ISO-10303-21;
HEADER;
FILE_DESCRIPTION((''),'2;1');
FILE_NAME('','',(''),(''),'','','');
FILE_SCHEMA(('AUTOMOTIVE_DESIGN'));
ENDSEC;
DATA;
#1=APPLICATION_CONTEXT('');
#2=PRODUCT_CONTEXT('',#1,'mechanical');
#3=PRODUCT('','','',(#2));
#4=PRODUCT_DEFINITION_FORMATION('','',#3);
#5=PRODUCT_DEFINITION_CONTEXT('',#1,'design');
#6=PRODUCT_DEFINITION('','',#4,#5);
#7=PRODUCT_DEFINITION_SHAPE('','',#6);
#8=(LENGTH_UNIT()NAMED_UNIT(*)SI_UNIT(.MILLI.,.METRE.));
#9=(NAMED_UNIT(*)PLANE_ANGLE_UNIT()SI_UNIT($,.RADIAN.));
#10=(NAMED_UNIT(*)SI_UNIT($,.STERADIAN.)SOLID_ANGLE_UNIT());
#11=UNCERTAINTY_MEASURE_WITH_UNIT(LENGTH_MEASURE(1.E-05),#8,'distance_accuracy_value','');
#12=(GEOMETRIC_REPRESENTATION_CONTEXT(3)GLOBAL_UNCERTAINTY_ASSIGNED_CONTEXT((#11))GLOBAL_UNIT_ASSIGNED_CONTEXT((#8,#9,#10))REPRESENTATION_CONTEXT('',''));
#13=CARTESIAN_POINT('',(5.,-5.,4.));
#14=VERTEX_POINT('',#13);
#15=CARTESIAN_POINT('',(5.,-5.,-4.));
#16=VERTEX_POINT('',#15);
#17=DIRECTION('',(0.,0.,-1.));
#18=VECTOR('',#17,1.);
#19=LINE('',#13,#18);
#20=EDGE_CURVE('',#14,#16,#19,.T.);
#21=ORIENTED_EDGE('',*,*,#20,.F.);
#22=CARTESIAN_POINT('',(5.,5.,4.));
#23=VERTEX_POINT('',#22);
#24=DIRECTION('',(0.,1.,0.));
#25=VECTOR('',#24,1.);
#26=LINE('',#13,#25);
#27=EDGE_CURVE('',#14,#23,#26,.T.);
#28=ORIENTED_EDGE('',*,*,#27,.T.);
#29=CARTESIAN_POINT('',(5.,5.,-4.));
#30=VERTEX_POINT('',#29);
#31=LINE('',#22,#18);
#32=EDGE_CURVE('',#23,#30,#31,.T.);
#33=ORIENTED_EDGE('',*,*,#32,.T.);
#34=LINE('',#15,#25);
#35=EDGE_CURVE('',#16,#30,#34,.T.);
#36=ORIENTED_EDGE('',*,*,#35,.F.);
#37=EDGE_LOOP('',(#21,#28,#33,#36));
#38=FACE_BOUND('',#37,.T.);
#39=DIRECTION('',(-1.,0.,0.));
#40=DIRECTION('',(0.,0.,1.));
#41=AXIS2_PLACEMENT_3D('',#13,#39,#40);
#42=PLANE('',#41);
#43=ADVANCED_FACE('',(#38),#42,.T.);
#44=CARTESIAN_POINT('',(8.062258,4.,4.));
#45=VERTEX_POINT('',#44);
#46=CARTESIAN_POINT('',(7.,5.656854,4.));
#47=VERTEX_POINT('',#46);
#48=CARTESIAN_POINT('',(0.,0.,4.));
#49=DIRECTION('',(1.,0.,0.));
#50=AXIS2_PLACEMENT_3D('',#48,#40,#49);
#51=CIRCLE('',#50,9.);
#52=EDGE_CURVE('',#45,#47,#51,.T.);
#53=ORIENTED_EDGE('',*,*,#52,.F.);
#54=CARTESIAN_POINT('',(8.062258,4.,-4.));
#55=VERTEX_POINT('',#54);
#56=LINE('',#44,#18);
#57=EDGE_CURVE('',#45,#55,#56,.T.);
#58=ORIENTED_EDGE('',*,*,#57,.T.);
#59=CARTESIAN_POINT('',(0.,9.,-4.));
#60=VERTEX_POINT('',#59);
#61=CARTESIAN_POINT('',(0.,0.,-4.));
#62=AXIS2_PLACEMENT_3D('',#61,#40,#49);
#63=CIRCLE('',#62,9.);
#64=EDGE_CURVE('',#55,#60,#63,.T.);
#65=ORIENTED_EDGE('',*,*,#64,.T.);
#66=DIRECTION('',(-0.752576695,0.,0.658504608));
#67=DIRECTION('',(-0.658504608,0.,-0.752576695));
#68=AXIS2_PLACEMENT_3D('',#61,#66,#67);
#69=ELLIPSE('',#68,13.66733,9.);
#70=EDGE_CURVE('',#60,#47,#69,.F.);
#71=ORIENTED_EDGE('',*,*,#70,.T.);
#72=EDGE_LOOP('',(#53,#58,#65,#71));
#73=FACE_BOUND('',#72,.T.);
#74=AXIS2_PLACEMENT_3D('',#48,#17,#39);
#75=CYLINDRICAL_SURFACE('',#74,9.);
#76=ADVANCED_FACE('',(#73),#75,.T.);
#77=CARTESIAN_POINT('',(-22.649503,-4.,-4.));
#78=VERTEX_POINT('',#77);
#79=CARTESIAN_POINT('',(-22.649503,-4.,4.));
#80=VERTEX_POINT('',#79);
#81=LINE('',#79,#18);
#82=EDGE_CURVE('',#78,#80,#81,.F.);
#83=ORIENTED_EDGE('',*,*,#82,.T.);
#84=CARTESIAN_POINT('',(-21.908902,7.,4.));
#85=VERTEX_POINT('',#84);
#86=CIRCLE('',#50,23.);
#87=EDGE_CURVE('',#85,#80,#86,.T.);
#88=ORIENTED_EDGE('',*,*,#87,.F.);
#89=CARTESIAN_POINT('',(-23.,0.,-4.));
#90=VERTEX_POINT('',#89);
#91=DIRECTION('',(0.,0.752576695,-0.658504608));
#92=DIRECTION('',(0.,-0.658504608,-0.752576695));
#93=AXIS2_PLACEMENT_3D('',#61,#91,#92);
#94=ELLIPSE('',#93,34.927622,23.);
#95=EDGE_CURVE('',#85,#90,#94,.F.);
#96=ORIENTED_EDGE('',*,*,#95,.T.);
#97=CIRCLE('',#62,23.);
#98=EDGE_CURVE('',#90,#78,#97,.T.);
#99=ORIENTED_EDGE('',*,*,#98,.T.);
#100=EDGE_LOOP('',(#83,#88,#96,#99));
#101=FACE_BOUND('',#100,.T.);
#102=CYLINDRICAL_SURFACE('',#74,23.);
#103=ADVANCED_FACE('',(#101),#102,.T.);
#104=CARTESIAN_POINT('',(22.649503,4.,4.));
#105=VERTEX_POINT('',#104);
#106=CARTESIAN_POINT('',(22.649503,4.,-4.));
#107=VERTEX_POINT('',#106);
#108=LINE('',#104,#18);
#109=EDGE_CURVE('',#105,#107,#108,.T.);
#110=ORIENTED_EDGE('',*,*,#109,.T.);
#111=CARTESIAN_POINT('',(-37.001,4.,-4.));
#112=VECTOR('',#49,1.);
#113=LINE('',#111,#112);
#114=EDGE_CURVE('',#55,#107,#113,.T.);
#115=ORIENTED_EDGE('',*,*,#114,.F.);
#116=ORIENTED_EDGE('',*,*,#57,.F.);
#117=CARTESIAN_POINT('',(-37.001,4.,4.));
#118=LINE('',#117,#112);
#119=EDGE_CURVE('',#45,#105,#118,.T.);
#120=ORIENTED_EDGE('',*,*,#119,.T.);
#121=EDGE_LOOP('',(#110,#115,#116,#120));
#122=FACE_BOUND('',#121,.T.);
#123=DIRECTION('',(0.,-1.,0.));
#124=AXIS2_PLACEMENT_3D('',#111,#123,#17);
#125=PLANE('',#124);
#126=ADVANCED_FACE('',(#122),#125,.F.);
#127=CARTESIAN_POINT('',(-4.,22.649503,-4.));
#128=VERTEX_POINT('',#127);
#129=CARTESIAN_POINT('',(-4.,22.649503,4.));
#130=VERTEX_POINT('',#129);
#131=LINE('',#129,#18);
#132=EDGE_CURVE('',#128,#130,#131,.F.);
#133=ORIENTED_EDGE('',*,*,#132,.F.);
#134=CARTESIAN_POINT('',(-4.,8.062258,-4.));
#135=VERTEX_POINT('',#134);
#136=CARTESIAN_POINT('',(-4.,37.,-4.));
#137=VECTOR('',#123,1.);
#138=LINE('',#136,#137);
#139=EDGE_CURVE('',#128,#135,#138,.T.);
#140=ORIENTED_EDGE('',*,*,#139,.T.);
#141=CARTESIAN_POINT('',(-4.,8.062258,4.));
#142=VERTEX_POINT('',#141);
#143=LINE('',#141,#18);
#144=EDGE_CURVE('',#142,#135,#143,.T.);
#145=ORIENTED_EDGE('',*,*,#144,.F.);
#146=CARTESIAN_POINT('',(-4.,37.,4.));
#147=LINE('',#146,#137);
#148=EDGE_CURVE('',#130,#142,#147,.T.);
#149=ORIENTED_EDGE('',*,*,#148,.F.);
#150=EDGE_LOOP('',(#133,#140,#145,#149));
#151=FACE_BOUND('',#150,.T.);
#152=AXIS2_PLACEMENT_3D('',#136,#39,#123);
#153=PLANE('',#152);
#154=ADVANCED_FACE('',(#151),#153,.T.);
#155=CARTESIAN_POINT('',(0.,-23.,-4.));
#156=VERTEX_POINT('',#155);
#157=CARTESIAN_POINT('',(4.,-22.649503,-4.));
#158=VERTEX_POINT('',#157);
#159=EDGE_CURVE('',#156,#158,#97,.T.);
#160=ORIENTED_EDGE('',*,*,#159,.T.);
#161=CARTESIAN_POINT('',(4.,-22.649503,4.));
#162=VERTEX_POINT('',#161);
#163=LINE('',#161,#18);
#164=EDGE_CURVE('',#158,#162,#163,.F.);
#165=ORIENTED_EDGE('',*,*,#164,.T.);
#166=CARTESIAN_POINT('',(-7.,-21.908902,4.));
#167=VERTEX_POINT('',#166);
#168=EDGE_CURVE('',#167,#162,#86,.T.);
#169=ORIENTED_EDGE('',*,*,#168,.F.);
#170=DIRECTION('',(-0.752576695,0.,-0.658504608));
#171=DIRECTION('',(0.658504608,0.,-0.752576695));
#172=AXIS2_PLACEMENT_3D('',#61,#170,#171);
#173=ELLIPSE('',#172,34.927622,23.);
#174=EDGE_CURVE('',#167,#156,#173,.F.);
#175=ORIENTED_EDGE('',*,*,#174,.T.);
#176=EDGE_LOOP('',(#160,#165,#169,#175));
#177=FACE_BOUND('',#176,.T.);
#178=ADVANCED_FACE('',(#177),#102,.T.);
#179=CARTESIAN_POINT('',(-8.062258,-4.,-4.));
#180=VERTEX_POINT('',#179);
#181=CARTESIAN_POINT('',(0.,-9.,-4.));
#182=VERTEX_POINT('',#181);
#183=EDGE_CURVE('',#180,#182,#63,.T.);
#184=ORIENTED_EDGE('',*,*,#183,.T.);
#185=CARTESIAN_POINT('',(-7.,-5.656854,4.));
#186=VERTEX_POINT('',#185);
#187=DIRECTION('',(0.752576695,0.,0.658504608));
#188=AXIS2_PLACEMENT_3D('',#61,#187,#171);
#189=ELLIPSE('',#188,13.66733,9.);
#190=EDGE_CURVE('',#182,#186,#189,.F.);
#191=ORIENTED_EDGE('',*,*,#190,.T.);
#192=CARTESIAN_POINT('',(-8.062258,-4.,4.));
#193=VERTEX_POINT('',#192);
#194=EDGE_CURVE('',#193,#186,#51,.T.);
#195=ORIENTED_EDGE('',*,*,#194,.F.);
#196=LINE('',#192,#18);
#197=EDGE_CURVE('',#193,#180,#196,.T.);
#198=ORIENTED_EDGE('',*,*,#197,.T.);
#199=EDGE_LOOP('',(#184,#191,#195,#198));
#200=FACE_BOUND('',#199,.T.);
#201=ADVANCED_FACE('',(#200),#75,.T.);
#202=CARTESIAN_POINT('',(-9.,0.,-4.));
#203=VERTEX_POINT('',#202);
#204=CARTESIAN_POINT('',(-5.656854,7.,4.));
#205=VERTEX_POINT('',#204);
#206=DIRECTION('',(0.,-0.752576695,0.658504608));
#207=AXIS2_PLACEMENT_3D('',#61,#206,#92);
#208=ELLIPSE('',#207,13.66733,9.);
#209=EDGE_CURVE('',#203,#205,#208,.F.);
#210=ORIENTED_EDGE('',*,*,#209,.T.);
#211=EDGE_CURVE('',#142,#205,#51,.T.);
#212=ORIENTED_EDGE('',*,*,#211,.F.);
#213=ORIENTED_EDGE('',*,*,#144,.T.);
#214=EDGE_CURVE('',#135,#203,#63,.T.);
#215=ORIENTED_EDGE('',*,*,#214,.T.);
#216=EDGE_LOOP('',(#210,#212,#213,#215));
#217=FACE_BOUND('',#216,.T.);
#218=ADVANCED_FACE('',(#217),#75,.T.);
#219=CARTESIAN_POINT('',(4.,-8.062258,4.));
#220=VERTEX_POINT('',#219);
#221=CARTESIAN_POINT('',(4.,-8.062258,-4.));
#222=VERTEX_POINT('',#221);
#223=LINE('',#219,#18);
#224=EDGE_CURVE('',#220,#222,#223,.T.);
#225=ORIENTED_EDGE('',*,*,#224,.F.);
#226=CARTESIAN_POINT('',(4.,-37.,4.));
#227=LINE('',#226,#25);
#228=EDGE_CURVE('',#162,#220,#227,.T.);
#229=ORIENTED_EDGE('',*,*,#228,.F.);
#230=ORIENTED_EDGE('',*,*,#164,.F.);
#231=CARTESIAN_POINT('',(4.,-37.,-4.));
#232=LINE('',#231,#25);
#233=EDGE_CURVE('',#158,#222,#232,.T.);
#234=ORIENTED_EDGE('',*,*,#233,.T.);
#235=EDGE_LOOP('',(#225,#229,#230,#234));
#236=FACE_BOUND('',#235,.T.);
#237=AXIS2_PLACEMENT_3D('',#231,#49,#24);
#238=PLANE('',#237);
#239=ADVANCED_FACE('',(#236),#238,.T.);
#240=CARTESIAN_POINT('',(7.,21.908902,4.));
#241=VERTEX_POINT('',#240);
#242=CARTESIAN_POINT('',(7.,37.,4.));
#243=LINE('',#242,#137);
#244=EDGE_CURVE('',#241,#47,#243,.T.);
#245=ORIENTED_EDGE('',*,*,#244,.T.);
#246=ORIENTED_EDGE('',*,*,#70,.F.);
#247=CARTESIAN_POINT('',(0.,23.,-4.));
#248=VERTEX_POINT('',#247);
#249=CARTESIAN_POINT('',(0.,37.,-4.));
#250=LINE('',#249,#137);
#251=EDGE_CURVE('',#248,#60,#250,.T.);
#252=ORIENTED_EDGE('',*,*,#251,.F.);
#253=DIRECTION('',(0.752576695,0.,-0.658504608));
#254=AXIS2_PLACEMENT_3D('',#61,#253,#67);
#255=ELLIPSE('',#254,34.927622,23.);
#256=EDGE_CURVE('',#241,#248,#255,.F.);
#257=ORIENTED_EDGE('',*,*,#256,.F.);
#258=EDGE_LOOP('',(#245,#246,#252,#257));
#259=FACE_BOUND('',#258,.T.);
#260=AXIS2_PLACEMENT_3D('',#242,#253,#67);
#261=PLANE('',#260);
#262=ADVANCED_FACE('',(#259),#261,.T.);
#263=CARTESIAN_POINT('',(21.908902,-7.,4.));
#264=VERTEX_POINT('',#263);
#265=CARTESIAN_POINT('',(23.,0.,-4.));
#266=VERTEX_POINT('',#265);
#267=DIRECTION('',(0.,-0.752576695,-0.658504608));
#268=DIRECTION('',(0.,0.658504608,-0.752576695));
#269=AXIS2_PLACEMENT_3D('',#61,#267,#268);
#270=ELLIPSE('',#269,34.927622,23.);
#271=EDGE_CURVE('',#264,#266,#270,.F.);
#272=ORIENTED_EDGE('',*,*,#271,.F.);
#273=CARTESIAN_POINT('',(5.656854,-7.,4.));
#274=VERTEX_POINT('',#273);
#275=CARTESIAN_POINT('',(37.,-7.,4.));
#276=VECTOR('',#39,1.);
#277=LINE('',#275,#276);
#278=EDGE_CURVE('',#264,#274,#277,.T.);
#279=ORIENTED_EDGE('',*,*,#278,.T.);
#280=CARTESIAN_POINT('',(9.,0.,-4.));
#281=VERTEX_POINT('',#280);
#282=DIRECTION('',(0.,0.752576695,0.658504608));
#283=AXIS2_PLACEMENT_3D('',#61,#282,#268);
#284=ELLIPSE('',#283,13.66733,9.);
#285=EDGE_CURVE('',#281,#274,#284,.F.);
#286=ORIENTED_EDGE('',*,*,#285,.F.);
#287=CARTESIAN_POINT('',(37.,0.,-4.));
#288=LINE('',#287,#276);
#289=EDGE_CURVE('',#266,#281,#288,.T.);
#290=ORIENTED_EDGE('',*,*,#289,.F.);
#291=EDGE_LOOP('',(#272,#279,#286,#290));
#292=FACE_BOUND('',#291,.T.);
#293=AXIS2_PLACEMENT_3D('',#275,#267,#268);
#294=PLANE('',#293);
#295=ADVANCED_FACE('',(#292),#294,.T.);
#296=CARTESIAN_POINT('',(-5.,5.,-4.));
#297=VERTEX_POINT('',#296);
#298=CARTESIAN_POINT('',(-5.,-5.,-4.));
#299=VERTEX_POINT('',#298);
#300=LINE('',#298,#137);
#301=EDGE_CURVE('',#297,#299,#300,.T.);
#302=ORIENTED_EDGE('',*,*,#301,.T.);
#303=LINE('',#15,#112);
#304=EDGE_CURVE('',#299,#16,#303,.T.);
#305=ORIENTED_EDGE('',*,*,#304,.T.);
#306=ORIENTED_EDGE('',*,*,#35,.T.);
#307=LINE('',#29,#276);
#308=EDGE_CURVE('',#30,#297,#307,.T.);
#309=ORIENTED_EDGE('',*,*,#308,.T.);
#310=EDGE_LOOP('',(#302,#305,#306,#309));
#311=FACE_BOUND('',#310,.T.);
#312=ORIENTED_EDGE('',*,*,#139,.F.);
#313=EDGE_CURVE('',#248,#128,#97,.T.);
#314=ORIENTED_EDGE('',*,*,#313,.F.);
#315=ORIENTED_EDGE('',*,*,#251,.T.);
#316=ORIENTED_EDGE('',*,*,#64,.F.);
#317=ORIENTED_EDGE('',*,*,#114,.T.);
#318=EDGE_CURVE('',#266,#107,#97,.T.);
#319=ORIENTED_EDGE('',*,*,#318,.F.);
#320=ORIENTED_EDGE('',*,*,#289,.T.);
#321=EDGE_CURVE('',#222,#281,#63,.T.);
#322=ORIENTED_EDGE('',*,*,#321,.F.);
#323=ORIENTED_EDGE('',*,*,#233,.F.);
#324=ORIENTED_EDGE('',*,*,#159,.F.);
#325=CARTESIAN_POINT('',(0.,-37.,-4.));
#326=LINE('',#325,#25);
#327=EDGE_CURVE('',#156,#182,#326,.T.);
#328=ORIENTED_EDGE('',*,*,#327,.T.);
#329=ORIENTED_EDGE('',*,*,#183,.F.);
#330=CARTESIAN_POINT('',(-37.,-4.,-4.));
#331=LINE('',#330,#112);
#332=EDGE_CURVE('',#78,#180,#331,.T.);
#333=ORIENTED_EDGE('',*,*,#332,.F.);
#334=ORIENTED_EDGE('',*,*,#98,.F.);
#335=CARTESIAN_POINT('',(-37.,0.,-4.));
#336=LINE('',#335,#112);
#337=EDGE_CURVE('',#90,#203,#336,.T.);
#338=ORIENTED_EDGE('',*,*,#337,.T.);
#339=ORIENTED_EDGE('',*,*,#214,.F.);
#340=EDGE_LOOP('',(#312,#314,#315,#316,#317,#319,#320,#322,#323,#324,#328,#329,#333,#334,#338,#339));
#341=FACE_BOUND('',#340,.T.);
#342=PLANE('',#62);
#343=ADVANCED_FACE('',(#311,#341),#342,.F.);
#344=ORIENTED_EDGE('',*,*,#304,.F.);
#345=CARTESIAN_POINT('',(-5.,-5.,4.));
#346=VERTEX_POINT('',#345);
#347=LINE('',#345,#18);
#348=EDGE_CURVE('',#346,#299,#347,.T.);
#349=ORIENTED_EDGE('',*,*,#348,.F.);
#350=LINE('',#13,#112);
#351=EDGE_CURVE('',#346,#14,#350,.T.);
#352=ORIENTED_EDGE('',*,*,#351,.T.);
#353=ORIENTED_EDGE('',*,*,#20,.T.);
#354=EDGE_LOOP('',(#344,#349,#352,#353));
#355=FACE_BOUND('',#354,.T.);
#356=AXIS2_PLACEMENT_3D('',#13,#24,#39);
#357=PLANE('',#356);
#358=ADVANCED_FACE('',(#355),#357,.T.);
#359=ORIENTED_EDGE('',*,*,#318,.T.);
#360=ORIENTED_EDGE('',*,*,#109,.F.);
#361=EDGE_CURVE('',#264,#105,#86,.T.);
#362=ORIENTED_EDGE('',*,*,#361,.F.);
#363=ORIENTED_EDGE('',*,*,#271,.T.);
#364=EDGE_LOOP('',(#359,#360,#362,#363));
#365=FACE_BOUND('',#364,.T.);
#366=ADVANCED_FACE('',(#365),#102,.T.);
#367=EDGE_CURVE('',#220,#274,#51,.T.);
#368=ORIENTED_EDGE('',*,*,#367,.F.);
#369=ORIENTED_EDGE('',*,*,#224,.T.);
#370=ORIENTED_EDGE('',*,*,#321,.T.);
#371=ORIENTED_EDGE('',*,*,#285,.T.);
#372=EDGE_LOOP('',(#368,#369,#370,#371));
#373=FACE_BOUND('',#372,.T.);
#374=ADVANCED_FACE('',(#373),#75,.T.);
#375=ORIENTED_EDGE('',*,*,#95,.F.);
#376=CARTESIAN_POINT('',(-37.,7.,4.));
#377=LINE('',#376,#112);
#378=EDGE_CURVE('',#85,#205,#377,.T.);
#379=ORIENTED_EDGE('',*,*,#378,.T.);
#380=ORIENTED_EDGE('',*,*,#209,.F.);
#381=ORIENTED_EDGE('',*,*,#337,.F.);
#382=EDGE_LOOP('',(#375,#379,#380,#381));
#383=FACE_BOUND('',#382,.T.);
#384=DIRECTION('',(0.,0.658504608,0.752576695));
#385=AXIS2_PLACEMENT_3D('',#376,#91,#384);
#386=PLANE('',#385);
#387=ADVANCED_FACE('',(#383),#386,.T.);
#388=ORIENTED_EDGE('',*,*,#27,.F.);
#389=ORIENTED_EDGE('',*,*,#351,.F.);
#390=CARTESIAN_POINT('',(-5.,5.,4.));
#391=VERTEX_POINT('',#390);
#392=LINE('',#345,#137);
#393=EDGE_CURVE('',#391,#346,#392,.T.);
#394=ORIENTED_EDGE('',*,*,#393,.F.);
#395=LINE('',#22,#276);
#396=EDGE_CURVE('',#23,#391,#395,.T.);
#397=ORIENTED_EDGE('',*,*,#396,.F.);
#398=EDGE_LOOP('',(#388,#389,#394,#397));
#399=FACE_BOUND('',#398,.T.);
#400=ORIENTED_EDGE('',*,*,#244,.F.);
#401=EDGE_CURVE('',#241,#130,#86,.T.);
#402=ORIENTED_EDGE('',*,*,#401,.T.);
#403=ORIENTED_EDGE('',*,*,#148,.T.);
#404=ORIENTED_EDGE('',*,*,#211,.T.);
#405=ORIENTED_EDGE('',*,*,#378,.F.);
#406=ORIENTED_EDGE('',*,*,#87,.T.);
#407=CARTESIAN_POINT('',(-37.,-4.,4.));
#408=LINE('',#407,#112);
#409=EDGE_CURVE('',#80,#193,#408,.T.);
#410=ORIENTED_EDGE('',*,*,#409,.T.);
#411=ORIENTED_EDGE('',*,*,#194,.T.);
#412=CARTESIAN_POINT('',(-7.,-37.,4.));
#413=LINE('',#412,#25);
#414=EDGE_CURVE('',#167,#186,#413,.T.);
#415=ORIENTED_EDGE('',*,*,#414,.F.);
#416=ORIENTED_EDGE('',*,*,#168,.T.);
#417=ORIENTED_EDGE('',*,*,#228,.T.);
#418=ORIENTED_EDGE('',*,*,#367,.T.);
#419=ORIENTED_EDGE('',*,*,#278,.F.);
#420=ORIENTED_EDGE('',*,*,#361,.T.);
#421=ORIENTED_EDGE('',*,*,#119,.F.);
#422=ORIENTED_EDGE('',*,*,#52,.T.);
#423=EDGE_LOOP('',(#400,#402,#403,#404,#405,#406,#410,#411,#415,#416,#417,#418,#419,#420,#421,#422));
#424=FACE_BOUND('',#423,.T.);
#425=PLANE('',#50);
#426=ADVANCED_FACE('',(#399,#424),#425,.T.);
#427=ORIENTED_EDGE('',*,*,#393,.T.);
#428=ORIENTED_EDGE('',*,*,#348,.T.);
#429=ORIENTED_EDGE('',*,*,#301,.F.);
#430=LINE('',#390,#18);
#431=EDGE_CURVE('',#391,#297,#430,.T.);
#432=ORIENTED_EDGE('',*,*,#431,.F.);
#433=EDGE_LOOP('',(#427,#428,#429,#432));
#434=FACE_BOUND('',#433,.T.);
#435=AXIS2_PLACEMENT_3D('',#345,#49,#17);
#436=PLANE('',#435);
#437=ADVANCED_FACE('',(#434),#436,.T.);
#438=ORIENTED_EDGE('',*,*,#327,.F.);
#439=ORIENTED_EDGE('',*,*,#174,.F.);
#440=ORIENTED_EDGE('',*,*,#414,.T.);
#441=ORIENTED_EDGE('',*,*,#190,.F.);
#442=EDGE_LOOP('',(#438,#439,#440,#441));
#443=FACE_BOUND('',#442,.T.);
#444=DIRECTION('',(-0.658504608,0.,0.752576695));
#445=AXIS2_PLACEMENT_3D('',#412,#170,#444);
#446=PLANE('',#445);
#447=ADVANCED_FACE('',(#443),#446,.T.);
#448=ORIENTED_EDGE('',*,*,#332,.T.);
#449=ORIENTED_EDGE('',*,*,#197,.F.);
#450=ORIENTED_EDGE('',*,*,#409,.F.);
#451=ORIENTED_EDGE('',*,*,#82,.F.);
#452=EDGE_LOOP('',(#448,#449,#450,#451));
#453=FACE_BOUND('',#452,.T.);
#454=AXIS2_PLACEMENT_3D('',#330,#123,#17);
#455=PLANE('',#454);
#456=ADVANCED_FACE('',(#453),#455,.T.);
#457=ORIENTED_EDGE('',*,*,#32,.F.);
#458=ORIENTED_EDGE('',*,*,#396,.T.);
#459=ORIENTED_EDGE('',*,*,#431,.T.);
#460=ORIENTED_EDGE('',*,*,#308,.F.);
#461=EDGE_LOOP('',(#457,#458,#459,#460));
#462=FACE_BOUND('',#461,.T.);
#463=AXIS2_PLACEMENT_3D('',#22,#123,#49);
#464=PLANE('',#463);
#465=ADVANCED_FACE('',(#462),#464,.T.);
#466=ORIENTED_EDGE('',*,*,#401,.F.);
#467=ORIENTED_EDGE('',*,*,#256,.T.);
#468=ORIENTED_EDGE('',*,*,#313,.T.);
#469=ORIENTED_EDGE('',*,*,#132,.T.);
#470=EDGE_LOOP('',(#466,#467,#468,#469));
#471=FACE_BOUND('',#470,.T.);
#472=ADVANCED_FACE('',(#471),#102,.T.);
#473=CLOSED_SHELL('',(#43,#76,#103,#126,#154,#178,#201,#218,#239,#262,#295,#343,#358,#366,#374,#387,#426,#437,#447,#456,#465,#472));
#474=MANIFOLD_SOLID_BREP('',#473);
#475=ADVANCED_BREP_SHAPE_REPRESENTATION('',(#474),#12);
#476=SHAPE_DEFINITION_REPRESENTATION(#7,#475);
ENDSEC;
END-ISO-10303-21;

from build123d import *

# Parameters (mm, degrees)
SKETCH1_R               = 9
SKETCH1_W               = 10
SKETCH1_H               = 10
BOSS_EXTRUDE1_DEPTH     = 4
BOSS_EXTRUDE2_START     = -28
BOSS_EXTRUDE2_DEPTH     = 31.343146
CIRPATTERN1_START       = -37
CIRPATTERN1_DEPTH       = 31.343145751
CIRPATTERN1_START_2     = 5.656854249
CIRPATTERN1_2_DEPTH     = 31.343145751
CIRPATTERN1_3_OUTLINE_W = 28
CIRPATTERN1_3_OUTLINE_H = 8
CIRPATTERN1_3_DEPTH     = 4
CIRPATTERN1_START_3     = -4
CIRPATTERN1_4_DEPTH     = 8
CIRPATTERN1_START_4     = 9
CIRPATTERN1_5_DEPTH     = 28
CUT_EXTRUDE1_START      = -4
SKETCH7_R               = 40
SKETCH7_R_2             = 23
CUT_EXTRUDE1_DEPTH      = 8
BOSS_EXTRUDE3_REACH     = 41.611


with BuildPart() as part:
    # Sketch1 → Boss-Extrude1 (new, symmetric)
    with BuildSketch(Plane.XY):
        Circle(SKETCH1_R)
        Rectangle(SKETCH1_W, SKETCH1_H, mode=Mode.SUBTRACT)
    extrude(amount=BOSS_EXTRUDE1_DEPTH, both=True)

    # Sketch4 → Boss-Extrude2 (add)
    with BuildSketch(Plane(origin=(-9, 0, 0), x_dir=(0, 0, -1), z_dir=(1, 0, 0)).offset(BOSS_EXTRUDE2_START)):
        Polygon((4, 0), (4, -4), (-4, -4), (-4, 7), align=None)
    extrude(amount=BOSS_EXTRUDE2_DEPTH)

    # CirPattern1: read off the stored shape, not the designer's step
    # CirPattern1 outline → CirPattern1 (add)
    with BuildSketch(Plane(origin=(0, 0, 0), x_dir=(1, 0, 0), z_dir=(0, 1, 0)).offset(CIRPATTERN1_START)):
        Polygon((-7, -4), (4, -4), (4, 4), (0, 4), align=None)
    extrude(amount=CIRPATTERN1_DEPTH)

    # CirPattern1 2 outline → CirPattern1 2 (add)
    with BuildSketch(Plane(origin=(0, 0, 0), x_dir=(1, 0, 0), z_dir=(0, 1, 0)).offset(CIRPATTERN1_START_2)):
        Polygon((-4, -4), (7, -4), (0, 4), (-4, 4), align=None)
    extrude(amount=CIRPATTERN1_2_DEPTH)

    # CirPattern1 3 outline → CirPattern1 3 (add)
    with BuildSketch(Plane(origin=(0, 0, 0), x_dir=(1, 0, 0), z_dir=(0, 1, 0))):
        with Locations((23, 0)):
            Rectangle(CIRPATTERN1_3_OUTLINE_W, CIRPATTERN1_3_OUTLINE_H)
    extrude(amount=CIRPATTERN1_3_DEPTH)

    # CirPattern1 4 outline → CirPattern1 4 (add)
    with BuildSketch(Plane.XY.offset(CIRPATTERN1_START_3)):
        with BuildLine():
            ThreePointArc((8.062257749, 4), (8.76242888, 2.054224947), (9, 0))
            Line((9, 0), (9, 4))
            Line((9, 4), (8.062257749, 4))
        make_face()
    extrude(amount=CIRPATTERN1_4_DEPTH)

    # CirPattern1 5 outline → CirPattern1 5 (add)
    with BuildSketch(Plane.YZ.offset(CIRPATTERN1_START_4)):
        Polygon((0, -4), (0, 4), (-7, 4), align=None)
    extrude(amount=CIRPATTERN1_5_DEPTH)

    # Sketch7 → Cut-Extrude1 (cut)
    with BuildSketch(Plane.XY.offset(CUT_EXTRUDE1_START)):
        Circle(SKETCH7_R)
        Circle(SKETCH7_R_2, mode=Mode.SUBTRACT)
    extrude(amount=CUT_EXTRUDE1_DEPTH, mode=Mode.SUBTRACT)

    # Sketch8 → Boss-Extrude3 (add, up to next)
    with BuildSketch(Plane.ZY.offset(-9), mode=Mode.PRIVATE) as boss_extrude3_sk1:
        Polygon((4, -7), (4, 0), (-4, 0), align=None)
    boss_extrude3_tool1 = extrude(boss_extrude3_sk1.sketch, amount=BOSS_EXTRUDE3_REACH, mode=Mode.PRIVATE) - part.part
    add(boss_extrude3_tool1.solids().sort_by_distance((9, -2.333333, 1.333333))[0])


solid = part.part
